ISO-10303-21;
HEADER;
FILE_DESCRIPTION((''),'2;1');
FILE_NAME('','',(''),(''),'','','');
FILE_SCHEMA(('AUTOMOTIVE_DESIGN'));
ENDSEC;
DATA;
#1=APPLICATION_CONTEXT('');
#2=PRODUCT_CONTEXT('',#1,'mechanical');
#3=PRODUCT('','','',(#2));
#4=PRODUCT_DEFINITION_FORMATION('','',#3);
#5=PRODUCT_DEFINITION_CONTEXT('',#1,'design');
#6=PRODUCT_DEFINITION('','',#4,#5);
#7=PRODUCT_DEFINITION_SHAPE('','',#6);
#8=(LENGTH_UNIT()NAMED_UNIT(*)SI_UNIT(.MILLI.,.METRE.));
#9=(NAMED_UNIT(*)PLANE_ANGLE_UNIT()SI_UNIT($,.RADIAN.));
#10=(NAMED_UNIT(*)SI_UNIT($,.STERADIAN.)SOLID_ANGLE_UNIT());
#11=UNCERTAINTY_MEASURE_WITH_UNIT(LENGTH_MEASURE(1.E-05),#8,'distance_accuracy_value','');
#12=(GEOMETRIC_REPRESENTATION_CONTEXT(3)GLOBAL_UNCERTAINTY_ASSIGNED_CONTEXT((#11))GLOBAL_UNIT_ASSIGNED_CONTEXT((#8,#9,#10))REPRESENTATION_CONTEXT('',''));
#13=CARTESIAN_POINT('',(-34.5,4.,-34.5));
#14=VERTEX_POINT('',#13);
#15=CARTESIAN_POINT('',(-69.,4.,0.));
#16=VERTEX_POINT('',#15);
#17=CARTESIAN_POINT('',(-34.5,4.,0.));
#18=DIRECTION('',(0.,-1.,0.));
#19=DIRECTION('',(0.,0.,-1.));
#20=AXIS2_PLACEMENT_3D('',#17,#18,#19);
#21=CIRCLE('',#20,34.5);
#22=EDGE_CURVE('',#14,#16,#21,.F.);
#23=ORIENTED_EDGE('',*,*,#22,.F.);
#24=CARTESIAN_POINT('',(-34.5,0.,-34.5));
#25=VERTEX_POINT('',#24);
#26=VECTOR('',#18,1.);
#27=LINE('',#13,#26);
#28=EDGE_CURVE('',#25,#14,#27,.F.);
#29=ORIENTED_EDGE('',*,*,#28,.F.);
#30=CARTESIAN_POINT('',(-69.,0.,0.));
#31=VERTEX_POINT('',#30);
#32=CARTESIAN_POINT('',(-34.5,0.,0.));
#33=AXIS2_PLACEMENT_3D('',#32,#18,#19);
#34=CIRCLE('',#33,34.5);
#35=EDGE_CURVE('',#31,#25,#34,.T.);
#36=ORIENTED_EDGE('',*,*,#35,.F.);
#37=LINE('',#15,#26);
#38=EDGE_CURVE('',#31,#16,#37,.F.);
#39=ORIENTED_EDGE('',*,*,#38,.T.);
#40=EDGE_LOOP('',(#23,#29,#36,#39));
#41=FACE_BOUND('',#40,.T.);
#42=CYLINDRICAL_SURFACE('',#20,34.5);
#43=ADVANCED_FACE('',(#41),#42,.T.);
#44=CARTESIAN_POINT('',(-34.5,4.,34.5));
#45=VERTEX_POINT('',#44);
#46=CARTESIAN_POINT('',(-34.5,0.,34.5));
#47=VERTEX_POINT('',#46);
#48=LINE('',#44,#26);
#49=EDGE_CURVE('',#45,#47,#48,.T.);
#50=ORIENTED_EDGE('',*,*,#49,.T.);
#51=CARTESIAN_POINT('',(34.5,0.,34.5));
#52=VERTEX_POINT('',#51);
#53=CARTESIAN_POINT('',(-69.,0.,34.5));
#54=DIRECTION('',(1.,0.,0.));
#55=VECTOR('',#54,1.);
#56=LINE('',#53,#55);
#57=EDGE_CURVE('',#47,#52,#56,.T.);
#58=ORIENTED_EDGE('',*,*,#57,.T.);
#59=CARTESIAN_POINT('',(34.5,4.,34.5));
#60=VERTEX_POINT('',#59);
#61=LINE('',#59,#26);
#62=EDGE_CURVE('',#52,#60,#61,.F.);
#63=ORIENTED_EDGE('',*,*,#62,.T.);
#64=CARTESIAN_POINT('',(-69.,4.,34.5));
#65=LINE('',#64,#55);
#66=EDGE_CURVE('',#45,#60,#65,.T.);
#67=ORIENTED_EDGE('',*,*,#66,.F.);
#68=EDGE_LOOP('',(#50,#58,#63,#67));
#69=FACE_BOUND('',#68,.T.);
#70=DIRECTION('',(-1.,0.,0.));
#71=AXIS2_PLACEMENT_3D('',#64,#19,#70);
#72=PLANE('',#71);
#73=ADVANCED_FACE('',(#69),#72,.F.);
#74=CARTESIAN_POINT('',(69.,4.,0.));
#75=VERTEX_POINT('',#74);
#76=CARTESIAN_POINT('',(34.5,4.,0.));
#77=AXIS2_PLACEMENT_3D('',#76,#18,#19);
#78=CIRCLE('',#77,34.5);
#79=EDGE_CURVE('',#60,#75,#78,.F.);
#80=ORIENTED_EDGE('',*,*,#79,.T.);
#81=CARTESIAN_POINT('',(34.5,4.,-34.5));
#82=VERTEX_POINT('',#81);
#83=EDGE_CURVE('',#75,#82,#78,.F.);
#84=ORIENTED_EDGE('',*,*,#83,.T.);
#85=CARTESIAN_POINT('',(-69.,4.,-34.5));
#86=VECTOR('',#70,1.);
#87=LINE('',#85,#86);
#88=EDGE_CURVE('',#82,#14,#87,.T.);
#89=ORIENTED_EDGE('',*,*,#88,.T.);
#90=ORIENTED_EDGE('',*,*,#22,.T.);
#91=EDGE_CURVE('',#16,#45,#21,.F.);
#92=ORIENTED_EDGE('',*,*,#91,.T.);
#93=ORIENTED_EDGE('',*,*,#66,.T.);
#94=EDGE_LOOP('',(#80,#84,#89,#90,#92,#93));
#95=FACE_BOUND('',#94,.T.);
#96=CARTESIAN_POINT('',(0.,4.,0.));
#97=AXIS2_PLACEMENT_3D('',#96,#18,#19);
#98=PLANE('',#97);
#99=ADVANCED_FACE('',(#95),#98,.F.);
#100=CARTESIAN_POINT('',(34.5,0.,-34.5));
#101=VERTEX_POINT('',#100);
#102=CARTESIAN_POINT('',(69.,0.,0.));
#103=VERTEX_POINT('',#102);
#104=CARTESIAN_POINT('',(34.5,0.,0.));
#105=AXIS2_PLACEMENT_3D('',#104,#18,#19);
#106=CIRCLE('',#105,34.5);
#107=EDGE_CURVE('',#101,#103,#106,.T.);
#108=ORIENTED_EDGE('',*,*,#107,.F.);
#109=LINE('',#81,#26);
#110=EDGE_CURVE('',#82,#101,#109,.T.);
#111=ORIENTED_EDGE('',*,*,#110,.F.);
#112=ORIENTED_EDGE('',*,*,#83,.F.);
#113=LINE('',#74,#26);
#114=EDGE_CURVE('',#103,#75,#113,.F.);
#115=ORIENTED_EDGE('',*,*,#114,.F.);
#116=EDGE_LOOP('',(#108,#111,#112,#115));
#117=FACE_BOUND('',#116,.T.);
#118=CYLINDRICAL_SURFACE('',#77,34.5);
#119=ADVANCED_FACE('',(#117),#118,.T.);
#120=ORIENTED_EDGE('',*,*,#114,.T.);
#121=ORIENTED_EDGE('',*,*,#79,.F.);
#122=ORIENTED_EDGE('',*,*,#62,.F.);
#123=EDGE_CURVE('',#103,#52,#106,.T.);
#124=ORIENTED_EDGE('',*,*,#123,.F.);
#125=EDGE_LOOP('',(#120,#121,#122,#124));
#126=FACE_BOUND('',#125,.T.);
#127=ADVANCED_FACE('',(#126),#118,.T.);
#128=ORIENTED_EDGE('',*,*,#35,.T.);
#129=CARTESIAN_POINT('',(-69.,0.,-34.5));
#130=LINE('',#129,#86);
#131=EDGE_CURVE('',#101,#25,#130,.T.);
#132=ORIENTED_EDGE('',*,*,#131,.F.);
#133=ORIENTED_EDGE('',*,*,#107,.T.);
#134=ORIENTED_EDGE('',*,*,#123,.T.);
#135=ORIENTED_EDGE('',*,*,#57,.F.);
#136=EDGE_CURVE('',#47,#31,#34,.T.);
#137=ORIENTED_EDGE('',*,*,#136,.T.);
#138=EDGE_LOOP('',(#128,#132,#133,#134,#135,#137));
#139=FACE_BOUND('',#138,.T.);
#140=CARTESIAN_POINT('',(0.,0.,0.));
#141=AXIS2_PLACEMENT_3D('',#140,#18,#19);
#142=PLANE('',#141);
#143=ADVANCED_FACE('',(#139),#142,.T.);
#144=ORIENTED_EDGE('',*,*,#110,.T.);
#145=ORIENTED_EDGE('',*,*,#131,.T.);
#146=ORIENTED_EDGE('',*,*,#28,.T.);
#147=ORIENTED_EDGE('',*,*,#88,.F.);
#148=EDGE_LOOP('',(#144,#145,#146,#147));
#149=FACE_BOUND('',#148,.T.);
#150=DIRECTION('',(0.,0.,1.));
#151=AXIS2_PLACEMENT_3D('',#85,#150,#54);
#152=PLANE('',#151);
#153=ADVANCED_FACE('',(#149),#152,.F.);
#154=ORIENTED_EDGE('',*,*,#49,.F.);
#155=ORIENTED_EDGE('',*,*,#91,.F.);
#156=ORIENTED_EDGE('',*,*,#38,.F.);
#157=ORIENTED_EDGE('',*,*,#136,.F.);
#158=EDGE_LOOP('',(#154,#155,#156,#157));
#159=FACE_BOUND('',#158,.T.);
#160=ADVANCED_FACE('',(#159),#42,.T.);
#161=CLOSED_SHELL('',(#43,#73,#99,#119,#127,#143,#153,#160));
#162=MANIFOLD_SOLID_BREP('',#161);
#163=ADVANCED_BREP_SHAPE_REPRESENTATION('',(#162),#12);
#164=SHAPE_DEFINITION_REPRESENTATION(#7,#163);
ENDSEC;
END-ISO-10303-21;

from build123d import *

# Parameters (mm, degrees)
SKETCH1_W           = 138
SKETCH1_H           = 69
BOSS_EXTRUDE1_DEPTH = 4
FILLET1_R           = 34.5


with BuildPart() as part:
    # Sketch1 → Boss-Extrude1 (new body)
    with BuildSketch(Plane(origin=(0, 0, 0), x_dir=(1, 0, 0), z_dir=(0, 1, 0))):
        Rectangle(SKETCH1_W, SKETCH1_H)
    extrude(amount=BOSS_EXTRUDE1_DEPTH)

    # Fillet1
    fillet1_edges = [part.edges().sort_by_distance(p)[0] for p in [
        (69, 2, 34.5),
        (69, 2, -34.5),
        (-69, 2, -34.5),
        (-69, 2, 34.5),
    ]]
    fillet(fillet1_edges, radius=FILLET1_R - 0.0001)  # a hair under: the kernel refuses the full size


solid = part.part
